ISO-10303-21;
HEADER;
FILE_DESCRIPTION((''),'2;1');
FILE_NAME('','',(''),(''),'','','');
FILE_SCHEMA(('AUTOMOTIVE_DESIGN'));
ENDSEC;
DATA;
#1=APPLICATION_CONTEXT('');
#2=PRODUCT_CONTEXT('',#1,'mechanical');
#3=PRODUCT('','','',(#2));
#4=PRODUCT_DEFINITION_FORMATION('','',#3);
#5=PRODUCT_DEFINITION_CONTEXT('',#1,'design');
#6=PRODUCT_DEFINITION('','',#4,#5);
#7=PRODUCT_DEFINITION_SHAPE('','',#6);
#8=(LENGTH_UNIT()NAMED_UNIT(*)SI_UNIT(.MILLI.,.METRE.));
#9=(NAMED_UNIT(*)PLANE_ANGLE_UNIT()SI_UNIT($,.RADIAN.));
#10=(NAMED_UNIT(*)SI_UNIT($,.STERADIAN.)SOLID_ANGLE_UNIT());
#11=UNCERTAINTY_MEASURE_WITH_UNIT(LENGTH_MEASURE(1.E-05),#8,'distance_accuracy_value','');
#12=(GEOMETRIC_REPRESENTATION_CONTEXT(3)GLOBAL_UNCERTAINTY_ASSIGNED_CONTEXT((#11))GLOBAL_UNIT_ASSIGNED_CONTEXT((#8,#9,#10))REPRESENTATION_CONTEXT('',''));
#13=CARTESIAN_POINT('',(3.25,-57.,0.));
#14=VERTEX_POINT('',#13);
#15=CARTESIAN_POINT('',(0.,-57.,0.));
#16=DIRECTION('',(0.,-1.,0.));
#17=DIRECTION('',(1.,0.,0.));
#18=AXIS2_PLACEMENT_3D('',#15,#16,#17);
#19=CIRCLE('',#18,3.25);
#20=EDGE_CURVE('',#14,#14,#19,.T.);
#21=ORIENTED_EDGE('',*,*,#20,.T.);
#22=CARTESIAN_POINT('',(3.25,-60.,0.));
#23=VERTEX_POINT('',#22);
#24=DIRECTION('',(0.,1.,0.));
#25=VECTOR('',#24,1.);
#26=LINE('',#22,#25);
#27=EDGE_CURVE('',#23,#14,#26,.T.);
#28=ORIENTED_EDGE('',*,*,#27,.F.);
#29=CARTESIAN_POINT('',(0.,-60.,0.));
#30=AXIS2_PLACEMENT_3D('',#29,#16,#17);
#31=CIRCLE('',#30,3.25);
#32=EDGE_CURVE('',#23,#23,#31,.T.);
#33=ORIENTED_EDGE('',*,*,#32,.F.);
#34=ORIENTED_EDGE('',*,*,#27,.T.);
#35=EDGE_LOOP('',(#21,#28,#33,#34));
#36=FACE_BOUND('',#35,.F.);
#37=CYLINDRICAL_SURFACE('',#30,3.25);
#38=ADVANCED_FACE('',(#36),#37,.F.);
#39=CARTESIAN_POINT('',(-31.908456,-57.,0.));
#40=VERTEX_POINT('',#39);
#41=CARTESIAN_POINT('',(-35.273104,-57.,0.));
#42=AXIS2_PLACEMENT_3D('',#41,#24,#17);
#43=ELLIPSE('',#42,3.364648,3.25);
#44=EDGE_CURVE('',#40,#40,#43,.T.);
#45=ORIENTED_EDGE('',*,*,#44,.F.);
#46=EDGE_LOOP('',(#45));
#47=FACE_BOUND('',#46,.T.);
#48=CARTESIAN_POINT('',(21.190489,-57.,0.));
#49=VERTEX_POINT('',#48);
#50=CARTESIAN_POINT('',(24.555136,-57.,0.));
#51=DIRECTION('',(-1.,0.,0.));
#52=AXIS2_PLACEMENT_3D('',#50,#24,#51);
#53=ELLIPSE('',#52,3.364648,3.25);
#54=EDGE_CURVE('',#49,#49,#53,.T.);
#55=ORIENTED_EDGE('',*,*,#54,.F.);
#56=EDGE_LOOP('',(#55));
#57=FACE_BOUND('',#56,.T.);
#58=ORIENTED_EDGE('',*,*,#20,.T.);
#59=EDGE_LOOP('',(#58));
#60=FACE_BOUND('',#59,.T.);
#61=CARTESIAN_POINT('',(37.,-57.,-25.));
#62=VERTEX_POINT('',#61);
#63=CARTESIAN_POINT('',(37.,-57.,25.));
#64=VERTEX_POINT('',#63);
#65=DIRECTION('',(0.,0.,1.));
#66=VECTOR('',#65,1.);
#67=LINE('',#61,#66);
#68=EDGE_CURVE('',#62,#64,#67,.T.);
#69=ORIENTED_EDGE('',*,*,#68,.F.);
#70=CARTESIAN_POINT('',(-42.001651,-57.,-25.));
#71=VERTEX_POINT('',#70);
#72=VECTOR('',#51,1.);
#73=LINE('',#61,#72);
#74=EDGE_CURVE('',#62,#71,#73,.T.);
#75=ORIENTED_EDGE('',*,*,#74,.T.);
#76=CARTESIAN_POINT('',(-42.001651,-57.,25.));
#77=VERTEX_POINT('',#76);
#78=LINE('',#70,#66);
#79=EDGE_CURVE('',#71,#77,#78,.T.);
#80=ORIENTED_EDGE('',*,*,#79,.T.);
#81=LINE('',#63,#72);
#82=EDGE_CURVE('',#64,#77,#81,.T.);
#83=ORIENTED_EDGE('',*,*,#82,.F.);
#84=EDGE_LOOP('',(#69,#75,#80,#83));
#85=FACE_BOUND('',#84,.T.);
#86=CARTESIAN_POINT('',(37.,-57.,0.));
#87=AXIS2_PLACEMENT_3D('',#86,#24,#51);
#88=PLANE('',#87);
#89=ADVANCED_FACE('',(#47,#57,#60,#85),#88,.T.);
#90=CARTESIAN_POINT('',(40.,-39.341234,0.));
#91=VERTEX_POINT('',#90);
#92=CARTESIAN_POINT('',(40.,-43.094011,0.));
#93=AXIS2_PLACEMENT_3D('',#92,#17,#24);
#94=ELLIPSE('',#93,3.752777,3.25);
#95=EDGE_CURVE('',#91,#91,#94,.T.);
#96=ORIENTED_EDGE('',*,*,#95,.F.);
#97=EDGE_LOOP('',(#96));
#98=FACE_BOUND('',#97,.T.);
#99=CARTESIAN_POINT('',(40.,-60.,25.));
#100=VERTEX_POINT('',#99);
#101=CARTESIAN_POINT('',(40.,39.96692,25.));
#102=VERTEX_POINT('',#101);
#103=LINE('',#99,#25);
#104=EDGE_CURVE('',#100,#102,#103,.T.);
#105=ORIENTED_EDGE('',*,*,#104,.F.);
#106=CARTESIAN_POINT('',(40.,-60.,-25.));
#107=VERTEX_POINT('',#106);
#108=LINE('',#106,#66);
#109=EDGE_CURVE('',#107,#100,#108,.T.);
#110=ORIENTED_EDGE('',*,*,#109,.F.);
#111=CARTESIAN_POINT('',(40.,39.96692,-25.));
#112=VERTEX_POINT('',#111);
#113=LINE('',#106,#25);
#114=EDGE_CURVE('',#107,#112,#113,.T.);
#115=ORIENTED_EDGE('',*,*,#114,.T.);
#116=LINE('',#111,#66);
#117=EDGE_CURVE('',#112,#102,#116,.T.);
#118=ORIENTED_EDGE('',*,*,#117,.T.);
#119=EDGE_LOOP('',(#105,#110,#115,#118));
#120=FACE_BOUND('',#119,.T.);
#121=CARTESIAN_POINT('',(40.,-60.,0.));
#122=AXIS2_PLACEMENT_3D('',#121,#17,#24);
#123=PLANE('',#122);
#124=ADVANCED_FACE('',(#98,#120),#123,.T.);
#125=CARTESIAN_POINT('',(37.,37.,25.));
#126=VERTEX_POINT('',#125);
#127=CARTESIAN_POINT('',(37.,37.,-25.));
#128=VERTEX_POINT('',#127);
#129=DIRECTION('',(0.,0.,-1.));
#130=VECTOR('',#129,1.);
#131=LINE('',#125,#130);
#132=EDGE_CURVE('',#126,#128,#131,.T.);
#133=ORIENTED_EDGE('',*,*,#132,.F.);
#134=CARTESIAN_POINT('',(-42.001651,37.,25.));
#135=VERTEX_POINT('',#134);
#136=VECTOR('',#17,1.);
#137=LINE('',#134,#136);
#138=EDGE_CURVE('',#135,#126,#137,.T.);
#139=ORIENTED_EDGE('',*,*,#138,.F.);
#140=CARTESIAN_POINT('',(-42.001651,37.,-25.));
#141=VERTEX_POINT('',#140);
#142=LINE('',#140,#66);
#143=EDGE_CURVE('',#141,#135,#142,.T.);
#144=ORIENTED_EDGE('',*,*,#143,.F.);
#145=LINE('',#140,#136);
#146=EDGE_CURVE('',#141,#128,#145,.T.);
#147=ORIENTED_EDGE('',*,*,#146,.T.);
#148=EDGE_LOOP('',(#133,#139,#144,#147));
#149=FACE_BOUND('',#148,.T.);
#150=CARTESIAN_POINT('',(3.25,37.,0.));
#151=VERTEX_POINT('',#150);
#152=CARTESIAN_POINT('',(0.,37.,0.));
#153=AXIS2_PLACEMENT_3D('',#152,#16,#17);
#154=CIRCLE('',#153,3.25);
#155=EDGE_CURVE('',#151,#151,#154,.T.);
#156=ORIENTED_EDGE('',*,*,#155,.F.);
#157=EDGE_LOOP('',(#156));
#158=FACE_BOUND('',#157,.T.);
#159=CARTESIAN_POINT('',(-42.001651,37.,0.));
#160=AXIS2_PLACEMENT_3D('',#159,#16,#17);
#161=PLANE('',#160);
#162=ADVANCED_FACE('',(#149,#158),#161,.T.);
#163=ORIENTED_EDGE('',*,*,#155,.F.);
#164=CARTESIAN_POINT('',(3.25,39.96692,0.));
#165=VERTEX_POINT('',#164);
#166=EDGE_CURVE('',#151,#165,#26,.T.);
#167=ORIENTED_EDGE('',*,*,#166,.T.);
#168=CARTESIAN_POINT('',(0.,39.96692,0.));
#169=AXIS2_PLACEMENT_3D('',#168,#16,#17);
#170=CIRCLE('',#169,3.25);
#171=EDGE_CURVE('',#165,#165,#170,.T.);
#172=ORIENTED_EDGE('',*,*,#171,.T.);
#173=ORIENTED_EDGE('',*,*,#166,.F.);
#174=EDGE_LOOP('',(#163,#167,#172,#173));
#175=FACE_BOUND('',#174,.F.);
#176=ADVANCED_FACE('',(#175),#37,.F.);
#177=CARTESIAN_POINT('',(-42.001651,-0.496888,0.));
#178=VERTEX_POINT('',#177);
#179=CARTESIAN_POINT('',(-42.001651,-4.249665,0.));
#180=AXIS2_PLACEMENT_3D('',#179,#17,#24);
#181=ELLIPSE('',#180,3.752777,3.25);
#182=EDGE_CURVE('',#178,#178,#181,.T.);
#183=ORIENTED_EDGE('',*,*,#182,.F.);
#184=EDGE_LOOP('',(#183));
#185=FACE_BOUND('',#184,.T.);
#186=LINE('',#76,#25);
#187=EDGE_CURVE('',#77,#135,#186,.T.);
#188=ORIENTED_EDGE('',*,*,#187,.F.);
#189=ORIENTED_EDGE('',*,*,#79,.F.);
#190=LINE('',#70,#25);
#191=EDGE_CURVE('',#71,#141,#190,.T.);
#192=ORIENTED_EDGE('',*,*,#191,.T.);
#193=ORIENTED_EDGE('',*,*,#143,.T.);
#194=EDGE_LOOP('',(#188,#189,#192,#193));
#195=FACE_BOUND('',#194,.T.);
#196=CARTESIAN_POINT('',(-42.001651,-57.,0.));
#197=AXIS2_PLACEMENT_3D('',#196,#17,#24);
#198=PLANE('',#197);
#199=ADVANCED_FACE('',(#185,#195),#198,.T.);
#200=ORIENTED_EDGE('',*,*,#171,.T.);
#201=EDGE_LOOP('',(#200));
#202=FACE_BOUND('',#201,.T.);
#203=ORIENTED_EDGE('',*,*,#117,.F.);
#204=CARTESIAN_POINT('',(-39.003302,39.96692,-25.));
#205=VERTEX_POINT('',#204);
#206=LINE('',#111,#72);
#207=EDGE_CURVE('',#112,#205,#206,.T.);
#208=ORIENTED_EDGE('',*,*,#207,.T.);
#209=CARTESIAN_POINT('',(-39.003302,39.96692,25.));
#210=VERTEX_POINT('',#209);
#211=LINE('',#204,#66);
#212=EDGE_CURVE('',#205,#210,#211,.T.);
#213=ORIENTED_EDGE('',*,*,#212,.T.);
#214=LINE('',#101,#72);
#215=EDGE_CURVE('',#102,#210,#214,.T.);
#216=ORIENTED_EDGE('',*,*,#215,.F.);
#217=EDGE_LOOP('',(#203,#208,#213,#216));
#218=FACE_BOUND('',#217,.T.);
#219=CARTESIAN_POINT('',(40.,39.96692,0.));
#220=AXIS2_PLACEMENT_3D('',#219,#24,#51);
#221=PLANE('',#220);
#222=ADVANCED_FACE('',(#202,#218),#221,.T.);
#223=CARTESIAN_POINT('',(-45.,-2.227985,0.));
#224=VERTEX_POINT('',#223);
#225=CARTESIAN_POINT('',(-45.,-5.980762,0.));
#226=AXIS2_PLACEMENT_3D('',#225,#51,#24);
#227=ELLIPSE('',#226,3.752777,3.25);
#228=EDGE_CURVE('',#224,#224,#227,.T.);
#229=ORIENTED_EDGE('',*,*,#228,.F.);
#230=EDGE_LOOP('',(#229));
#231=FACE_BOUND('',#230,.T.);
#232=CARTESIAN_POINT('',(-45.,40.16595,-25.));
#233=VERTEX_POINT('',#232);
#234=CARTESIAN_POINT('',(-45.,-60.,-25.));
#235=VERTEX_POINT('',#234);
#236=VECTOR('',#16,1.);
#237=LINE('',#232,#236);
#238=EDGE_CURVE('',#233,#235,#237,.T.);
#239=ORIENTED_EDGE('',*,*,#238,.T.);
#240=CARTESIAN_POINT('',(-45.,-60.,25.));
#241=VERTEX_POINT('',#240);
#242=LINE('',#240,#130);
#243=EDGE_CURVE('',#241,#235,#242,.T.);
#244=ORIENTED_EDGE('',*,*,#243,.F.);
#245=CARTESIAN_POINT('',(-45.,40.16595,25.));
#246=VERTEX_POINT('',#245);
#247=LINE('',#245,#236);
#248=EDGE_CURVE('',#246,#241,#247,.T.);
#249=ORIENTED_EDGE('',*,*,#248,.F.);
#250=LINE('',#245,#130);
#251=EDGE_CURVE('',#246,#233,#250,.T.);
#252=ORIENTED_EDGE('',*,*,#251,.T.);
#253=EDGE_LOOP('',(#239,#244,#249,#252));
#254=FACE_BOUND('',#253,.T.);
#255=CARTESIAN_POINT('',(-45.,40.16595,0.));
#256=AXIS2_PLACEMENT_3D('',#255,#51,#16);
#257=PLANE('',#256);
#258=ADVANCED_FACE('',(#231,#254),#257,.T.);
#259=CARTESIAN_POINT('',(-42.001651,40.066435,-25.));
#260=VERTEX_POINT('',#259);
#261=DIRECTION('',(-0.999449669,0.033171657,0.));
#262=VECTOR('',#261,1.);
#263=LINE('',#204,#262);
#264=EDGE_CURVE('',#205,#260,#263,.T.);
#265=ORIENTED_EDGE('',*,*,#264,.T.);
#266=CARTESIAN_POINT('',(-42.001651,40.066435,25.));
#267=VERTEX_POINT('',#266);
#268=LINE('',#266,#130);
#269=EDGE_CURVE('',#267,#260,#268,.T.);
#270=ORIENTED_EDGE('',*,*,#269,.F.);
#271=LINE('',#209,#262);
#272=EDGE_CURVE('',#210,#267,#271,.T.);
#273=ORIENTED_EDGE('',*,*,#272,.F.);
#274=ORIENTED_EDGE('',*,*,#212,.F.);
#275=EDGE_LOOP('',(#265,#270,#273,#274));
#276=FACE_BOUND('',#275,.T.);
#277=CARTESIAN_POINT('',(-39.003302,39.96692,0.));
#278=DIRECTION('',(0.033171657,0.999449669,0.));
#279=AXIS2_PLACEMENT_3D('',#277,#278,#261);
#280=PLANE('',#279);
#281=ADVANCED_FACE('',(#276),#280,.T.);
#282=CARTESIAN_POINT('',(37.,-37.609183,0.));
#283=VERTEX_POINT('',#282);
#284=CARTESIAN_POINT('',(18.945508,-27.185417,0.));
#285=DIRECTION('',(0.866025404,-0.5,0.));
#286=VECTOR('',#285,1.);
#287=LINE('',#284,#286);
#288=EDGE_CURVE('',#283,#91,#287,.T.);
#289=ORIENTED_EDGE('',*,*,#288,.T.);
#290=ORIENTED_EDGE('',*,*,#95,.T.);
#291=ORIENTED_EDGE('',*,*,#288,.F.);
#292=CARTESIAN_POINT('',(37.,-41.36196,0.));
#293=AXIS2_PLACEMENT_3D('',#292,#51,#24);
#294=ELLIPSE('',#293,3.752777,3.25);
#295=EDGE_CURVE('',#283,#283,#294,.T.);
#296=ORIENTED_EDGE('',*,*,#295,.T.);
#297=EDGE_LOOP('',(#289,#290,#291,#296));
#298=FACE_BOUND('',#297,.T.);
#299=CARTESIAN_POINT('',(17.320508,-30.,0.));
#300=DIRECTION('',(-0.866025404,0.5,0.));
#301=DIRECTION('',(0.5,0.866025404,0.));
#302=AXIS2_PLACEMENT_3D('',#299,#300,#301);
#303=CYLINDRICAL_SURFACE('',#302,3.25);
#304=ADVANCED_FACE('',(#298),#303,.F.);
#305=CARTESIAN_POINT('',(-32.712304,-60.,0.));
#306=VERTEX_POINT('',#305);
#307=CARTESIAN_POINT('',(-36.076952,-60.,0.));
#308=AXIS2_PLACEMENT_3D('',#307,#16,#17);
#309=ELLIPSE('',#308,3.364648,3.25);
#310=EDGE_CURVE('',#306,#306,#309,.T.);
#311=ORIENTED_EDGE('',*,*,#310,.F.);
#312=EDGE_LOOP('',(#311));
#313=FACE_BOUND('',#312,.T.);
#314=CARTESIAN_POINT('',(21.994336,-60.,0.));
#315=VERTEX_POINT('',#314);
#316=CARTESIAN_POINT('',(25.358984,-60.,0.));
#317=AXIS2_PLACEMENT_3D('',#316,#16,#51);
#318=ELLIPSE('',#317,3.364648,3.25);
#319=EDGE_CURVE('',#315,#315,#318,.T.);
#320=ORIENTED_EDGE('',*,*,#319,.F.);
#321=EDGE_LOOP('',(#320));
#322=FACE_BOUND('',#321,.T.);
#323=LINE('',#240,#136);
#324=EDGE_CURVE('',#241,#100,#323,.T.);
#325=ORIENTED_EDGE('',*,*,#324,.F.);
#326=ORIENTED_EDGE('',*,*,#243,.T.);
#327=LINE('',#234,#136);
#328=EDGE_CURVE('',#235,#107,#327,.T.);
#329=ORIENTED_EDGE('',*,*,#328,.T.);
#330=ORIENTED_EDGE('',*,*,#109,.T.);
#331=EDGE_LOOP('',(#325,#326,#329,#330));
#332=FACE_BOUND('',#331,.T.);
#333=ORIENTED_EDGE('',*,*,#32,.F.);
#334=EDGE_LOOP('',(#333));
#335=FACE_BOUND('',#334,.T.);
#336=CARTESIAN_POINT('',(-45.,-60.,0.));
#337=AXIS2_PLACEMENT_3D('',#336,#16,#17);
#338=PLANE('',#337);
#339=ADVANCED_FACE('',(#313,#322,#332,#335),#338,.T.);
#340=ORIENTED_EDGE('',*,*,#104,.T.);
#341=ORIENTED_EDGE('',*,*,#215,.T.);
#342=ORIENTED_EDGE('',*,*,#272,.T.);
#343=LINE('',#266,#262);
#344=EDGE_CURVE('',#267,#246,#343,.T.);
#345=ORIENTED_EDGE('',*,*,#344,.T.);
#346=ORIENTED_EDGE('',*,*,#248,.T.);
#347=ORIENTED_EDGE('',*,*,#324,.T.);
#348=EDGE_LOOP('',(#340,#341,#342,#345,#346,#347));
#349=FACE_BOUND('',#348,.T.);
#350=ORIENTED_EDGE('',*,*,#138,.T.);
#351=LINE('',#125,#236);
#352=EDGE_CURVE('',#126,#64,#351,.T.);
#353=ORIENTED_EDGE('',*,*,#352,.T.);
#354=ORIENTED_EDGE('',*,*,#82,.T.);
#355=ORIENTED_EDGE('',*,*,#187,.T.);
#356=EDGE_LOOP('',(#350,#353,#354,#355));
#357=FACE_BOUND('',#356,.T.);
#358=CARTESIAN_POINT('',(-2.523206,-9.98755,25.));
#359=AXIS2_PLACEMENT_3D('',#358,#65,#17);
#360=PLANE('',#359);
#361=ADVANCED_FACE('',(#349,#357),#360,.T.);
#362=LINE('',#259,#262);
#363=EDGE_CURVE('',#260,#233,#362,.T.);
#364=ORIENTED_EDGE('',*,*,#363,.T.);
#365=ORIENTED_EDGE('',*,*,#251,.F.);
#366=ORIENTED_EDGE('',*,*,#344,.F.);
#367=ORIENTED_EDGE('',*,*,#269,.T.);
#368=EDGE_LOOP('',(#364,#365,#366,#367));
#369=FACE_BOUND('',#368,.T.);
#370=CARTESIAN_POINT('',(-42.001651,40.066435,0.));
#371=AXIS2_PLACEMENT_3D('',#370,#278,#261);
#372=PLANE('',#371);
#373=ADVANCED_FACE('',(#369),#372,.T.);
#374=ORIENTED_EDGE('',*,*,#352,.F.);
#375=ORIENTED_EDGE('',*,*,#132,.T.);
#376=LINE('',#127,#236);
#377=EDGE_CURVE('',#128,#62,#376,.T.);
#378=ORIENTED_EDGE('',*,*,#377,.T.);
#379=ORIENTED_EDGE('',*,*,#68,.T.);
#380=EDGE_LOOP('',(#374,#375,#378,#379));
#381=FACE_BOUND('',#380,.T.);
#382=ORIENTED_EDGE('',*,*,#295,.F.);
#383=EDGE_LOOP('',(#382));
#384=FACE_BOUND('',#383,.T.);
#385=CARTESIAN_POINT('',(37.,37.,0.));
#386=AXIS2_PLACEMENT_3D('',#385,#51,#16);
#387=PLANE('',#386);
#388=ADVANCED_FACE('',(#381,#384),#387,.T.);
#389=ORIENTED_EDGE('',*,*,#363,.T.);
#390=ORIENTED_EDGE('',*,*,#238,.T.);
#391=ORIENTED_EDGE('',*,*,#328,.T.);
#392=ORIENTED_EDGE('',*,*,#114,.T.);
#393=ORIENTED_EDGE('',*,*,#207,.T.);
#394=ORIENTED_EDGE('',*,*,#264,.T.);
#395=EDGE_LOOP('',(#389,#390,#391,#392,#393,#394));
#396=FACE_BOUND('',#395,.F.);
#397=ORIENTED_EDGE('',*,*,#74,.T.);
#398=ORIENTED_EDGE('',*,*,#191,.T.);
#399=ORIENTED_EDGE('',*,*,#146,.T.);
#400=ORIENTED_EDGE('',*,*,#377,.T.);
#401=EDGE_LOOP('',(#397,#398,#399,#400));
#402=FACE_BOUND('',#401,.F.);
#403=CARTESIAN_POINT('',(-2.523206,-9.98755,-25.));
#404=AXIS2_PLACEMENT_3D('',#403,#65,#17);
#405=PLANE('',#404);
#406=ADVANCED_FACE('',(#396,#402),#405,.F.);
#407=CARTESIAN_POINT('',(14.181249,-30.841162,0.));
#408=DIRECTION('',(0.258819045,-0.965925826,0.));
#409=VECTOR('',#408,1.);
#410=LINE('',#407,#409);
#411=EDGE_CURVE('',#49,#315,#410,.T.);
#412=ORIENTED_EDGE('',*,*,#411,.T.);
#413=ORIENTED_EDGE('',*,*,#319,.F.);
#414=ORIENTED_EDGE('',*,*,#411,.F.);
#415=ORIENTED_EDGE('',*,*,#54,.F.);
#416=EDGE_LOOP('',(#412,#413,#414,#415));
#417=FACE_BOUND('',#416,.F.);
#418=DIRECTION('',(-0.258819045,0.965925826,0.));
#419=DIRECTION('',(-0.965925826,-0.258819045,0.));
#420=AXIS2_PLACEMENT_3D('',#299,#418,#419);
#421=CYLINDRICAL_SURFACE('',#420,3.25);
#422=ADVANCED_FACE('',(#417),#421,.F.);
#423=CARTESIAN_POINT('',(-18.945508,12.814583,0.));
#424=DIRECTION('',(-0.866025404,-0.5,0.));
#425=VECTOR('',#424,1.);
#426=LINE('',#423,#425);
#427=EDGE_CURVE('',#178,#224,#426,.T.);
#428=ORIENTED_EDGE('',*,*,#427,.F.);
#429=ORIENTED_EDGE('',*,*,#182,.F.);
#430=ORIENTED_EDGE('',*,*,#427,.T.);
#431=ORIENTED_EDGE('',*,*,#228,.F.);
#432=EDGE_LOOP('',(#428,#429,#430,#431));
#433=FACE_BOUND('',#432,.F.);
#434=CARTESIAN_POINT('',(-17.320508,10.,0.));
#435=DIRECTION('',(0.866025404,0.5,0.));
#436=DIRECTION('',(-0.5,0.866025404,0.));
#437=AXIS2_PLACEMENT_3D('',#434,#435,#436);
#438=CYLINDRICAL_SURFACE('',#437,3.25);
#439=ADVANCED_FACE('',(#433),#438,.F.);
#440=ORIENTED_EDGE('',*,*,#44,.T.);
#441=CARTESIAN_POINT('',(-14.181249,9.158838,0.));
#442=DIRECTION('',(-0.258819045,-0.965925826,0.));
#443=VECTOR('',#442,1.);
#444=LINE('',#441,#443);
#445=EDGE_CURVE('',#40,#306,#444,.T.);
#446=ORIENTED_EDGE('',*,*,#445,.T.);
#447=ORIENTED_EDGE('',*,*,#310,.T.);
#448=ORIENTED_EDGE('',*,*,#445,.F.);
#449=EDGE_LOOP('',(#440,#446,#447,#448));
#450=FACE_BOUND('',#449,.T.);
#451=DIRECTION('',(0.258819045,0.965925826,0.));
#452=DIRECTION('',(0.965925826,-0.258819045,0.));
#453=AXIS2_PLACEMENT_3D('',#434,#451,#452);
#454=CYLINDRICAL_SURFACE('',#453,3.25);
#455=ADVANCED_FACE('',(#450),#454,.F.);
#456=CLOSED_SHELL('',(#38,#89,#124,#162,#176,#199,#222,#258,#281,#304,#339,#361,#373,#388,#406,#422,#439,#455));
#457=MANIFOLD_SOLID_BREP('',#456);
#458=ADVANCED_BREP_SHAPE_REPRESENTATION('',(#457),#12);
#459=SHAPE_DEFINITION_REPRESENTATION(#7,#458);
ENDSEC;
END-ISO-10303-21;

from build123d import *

# Parameters (mm, degrees)
F2_DEPTH  = 25
F3_DEPTH  = 25
F10_R     = 3.25
F11_DEPTH = 50
F12_R     = 3.25
F13_DEPTH = 50
F14_R     = 3.25
F15_DEPTH = 120
F22_R     = 3.25
F23_DEPTH = 100
F24_R     = 3.25
F25_DEPTH = 100


with BuildPart() as f2:
    # F1 (on Top) → F2 (new body)
    with BuildSketch(Plane.XY):
        Polygon((-45, -60), (-40, -60), (40, -60), (40, 39.9669196701), (-36.0033019851, 39.9669196701), (-39.0033019851, 39.9669196701), (-42.0016509926, 40.0664346415), (-45, 40.1659496129), align=None)
        Polygon((37, -57), (-37, -57), (-42.0016509926, -57), (-42.0016509926, 37), (-37, 37), (37, 37), align=None, mode=Mode.SUBTRACT)
    extrude(amount=F2_DEPTH)

    # F1 (on Top) → F3 (join)
    with BuildSketch(Plane.XY):
        Polygon((-45, -60), (-40, -60), (40, -60), (40, 39.9669196701), (-36.0033019851, 39.9669196701), (-39.0033019851, 39.9669196701), (-42.0016509926, 40.0664346415), (-45, 40.1659496129), align=None)
        Polygon((37, -57), (-37, -57), (-42.0016509926, -57), (-42.0016509926, 37), (-37, 37), (37, 37), align=None, mode=Mode.SUBTRACT)
    extrude(amount=-F3_DEPTH)

    # F10 (on face) → F11 (cut)
    with BuildSketch(Plane(origin=(8.6602540378, -32.3205080757, 0), x_dir=(-0.9659258263, -0.2588190451, 0), z_dir=(-0.2588190451, 0.9659258263, 0))):
        with Locations((-8.9657547217, 0)):
            Circle(F10_R)
    extrude(amount=-F11_DEPTH, mode=Mode.SUBTRACT)

    # F12 (on face) → F13 (cut)
    with BuildSketch(Plane(origin=(25.9807621135, -15, 0), x_dir=(0.5, 0.8660254038, 0), z_dir=(0.8660254038, -0.5, 0))):
        with Locations((-17.3205080757, 0)):
            Circle(F12_R)
    extrude(amount=F13_DEPTH, mode=Mode.SUBTRACT)

    # F14 (on face) → F15 (cut)
    with BuildSketch(Plane.XZ.offset(60)):
        Circle(F14_R)
    extrude(amount=-F15_DEPTH, mode=Mode.SUBTRACT)

    # F22 (on face) → F23 (cut)
    with BuildSketch(Plane(origin=(1.3397459622, 5, 0), x_dir=(0.9659258263, -0.2588190451, 0), z_dir=(-0.2588190451, -0.9659258263, 0))):
        with Locations((-19.3185165258, 0)):
            Circle(F22_R)
    extrude(amount=F23_DEPTH, mode=Mode.SUBTRACT)

    # F24 (on face) → F25 (cut)
    with BuildSketch(Plane(origin=(-8.6602540378, -5, 0), x_dir=(-0.5, 0.8660254038, 0), z_dir=(0.8660254038, 0.5, 0))):
        with Locations((17.3205080757, 0)):
            Circle(F24_R)
    extrude(amount=-F25_DEPTH, mode=Mode.SUBTRACT)


solid = f2.part
